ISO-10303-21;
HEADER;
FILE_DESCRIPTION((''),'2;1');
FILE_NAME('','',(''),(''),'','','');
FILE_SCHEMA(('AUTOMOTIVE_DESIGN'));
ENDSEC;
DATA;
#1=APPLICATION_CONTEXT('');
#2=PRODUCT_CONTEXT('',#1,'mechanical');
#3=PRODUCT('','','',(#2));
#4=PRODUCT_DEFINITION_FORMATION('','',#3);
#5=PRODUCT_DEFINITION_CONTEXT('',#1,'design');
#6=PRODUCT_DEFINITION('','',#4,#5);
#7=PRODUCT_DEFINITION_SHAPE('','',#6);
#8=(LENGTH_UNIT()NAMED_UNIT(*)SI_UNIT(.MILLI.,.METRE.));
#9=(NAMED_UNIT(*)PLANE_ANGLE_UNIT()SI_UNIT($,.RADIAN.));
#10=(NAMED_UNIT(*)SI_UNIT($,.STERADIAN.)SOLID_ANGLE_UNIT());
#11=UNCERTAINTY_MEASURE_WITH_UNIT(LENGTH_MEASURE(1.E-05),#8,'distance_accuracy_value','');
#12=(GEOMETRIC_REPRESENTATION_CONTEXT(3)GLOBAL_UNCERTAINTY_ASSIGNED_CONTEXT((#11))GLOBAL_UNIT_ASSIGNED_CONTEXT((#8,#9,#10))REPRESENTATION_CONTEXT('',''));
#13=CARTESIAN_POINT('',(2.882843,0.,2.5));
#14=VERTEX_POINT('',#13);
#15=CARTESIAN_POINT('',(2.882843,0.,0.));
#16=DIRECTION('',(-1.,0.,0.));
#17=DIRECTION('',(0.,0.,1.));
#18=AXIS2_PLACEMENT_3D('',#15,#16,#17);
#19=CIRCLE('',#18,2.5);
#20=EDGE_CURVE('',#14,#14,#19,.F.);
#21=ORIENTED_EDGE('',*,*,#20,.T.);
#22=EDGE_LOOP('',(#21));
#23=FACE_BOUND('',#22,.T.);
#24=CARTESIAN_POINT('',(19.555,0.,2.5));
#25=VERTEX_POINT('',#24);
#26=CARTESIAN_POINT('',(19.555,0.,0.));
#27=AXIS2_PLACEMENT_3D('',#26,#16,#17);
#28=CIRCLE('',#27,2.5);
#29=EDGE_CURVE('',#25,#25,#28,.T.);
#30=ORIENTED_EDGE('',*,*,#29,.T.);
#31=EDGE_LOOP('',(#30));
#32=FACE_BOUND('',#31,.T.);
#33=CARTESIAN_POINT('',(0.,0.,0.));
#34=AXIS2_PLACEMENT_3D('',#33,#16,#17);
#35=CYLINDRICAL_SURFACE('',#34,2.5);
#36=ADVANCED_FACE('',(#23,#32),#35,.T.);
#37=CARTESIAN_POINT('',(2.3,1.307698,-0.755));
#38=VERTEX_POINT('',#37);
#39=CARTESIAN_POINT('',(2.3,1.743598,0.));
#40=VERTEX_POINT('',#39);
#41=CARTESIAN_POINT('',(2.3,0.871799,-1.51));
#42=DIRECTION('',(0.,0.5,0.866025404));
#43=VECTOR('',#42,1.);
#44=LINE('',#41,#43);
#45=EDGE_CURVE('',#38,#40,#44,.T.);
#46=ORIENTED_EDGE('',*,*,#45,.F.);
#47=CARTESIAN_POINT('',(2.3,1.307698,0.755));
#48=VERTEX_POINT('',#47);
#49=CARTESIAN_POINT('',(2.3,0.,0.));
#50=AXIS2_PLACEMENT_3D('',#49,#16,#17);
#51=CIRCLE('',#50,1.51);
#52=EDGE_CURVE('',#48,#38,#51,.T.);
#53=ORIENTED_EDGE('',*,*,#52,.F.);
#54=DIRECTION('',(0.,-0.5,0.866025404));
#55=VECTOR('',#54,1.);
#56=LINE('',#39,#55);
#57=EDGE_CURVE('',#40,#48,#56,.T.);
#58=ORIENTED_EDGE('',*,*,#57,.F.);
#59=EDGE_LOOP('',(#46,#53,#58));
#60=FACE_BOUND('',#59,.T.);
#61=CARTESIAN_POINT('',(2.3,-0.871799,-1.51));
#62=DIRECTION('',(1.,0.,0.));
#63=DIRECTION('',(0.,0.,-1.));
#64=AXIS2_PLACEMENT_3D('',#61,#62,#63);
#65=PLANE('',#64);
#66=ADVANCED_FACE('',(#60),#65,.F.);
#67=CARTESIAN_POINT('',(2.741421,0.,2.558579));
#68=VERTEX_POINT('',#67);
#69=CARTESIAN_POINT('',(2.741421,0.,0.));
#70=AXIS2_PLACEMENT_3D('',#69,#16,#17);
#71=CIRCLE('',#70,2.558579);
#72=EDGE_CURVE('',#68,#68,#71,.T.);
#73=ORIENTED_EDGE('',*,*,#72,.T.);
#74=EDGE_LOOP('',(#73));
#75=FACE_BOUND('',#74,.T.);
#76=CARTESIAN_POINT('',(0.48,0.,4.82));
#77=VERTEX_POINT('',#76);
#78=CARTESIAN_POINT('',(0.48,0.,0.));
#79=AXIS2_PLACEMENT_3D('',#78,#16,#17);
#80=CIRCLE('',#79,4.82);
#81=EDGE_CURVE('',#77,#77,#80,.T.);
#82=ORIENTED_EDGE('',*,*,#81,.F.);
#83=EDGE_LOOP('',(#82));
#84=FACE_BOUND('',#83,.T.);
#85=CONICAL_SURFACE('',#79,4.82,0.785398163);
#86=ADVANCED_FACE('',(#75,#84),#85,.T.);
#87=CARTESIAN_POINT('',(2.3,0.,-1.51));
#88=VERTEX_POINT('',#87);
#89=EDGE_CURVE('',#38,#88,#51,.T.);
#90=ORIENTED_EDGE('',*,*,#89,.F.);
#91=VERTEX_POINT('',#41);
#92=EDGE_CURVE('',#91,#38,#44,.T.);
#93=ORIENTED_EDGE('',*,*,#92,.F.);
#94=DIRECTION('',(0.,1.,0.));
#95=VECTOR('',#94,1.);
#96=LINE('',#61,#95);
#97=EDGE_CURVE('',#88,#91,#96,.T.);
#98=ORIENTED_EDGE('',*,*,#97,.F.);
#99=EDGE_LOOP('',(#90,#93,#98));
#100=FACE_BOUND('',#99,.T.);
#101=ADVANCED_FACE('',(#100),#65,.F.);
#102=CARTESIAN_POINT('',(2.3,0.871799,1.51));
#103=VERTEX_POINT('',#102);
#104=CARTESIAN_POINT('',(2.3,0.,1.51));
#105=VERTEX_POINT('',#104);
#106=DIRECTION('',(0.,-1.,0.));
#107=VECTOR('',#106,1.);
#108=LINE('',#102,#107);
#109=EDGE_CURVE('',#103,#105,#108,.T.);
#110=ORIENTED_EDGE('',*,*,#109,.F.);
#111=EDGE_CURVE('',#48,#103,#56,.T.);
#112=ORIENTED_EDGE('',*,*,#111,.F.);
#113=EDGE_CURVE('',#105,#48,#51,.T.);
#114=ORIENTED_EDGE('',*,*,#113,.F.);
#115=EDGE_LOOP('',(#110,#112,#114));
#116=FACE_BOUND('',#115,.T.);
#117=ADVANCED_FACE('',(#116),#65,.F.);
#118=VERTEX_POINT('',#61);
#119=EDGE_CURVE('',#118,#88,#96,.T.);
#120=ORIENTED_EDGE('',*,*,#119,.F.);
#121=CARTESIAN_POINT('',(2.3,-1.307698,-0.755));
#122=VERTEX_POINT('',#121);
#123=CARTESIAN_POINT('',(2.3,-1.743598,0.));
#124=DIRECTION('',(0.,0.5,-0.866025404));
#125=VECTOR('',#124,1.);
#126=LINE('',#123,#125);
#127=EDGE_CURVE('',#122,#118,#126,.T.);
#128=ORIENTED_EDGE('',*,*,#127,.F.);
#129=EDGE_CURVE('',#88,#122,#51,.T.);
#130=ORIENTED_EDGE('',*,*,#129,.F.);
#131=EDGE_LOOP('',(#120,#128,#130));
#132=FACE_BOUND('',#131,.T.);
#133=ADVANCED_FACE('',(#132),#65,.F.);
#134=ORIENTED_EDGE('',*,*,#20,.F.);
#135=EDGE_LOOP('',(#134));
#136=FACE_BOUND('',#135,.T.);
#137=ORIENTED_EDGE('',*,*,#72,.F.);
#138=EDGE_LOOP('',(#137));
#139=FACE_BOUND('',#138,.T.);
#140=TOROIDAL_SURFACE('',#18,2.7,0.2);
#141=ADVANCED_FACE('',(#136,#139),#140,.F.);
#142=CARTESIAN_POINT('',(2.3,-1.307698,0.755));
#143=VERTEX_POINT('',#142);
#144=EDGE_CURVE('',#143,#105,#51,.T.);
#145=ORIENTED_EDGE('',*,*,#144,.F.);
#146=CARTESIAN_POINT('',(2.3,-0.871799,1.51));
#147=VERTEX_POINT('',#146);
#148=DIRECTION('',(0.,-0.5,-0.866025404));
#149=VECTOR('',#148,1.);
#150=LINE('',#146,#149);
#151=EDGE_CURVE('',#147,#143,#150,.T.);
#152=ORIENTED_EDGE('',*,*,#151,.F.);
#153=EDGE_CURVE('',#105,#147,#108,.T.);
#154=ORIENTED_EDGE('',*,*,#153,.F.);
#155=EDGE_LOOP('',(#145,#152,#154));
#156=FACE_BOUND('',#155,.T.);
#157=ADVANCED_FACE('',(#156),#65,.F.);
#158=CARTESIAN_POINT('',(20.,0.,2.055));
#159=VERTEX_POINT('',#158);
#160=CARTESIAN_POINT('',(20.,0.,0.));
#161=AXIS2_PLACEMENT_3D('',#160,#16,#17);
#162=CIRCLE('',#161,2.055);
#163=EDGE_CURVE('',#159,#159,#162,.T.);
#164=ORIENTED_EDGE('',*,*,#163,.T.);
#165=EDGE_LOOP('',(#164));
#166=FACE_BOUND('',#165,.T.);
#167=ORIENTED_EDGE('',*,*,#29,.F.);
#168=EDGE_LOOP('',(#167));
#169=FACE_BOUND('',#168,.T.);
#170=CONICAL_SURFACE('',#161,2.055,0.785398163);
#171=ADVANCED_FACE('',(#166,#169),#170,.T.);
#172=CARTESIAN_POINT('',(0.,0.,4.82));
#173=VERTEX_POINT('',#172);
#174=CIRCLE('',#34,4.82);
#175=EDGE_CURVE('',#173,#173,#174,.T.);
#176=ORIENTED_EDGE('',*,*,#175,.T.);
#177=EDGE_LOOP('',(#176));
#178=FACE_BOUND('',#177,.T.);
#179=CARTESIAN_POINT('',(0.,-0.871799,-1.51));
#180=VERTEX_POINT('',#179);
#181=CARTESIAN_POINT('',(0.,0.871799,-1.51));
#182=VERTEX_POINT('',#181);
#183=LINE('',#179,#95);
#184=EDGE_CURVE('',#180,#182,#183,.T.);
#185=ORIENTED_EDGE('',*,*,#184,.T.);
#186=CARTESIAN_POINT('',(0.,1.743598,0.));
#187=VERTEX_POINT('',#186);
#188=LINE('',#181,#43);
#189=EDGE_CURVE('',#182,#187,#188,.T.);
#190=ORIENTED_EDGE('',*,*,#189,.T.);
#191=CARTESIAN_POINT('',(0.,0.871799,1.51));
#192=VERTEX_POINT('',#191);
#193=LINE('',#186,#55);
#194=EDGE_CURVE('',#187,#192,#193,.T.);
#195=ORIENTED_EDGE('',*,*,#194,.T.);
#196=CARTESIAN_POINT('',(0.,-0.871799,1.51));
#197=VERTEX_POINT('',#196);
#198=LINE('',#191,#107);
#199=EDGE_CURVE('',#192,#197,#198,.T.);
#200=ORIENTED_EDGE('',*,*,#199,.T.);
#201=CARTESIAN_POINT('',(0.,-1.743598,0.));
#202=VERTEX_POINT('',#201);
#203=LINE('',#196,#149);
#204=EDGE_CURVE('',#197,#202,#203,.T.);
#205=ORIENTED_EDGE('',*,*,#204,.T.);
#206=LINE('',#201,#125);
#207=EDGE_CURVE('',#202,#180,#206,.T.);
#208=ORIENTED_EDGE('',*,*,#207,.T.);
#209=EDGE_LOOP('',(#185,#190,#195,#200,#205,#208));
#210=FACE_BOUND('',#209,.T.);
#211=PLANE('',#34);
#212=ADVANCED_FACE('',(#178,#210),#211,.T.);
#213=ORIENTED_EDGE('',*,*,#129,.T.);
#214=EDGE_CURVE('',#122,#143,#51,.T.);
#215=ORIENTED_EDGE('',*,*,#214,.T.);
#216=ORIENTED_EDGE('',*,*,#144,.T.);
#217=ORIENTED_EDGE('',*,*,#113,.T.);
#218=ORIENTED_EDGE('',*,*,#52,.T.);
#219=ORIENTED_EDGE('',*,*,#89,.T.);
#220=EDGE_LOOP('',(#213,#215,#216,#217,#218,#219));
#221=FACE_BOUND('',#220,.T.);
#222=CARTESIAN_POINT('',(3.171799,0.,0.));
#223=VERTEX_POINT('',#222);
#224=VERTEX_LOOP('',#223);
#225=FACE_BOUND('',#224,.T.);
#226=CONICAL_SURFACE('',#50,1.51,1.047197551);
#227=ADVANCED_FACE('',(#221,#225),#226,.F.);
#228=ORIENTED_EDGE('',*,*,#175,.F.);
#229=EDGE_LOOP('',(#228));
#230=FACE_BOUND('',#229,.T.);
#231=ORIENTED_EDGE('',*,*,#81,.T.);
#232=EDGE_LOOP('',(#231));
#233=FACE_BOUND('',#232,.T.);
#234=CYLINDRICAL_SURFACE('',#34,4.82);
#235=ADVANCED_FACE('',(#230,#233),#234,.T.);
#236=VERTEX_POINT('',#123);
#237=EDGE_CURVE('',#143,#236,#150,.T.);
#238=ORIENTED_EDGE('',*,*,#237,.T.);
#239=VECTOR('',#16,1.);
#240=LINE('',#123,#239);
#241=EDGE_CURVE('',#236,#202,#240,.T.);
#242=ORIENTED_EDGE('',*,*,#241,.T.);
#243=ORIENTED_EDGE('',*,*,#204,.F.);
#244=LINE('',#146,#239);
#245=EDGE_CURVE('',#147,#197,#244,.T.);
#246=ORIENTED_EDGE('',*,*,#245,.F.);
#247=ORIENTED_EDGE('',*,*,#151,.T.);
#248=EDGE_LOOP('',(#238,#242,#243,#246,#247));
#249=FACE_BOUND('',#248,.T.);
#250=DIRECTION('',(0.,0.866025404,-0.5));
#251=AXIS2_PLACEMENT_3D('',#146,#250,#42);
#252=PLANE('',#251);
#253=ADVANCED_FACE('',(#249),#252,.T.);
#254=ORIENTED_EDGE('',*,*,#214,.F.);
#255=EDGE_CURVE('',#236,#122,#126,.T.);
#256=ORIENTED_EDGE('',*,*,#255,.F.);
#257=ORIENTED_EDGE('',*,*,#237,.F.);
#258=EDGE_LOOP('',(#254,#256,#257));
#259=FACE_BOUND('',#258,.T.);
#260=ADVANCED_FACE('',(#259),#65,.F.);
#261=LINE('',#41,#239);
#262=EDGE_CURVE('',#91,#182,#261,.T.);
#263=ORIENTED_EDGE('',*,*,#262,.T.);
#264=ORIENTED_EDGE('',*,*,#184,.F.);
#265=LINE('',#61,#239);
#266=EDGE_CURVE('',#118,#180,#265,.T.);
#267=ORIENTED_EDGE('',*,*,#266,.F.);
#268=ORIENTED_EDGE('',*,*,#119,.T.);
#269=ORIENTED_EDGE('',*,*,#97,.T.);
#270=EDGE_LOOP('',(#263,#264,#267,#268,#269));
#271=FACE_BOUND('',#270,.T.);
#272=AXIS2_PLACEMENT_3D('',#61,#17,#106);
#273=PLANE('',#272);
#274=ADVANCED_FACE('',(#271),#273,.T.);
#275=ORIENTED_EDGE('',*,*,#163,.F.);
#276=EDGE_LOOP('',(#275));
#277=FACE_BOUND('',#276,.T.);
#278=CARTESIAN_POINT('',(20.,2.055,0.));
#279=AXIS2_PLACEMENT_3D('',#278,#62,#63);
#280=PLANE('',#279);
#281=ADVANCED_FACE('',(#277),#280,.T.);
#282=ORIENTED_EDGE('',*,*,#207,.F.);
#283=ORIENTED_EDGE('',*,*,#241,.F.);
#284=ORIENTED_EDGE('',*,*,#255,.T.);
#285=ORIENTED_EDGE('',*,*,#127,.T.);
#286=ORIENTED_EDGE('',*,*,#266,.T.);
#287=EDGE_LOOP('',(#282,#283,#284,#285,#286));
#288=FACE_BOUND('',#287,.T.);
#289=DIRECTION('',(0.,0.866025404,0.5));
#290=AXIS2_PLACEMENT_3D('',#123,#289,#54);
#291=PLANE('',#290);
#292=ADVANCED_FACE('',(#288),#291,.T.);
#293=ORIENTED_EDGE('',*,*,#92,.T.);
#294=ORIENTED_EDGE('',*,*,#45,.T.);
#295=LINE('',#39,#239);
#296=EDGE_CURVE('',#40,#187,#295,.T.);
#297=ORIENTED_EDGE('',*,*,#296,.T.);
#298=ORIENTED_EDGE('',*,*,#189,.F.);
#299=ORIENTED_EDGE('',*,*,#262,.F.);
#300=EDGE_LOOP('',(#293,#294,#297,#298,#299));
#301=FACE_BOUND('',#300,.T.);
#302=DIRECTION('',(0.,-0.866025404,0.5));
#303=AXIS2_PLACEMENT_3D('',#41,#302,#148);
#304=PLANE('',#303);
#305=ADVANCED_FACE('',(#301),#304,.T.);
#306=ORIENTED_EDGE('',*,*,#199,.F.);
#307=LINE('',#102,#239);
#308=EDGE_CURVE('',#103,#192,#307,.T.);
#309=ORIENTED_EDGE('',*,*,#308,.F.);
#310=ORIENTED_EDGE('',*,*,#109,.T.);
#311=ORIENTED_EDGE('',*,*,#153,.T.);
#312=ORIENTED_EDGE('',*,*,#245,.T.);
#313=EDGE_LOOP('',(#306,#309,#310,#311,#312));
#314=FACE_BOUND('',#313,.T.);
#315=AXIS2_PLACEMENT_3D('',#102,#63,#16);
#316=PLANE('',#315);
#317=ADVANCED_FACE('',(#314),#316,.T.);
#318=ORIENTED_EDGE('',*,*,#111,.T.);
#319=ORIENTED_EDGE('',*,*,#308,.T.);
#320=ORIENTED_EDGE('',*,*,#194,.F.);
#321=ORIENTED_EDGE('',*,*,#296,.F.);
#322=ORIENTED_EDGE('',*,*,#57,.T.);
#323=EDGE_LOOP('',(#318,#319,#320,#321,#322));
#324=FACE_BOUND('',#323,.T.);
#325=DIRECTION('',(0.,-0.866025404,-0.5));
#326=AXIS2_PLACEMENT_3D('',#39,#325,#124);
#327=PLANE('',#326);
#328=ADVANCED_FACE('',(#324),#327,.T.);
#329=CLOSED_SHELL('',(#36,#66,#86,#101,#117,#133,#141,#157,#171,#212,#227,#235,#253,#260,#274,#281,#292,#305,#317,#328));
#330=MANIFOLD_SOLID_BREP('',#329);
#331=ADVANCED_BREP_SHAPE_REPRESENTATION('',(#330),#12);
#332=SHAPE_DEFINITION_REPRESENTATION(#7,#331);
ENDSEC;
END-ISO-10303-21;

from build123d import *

# Parameters (mm, degrees)
FILLET1_R   = 0.2
HEX_START   = -2.3
HEX_2_DEPTH = 2.3


with BuildPart() as part:
    # BodySke → BaseBody (revolve)
    with BuildSketch(Plane.XY, mode=Mode.PRIVATE) as basebody_sk:
        Polygon((0, 0), (0, 4.82), (0.48, 4.82), (2.8, 2.5), (19.555, 2.5), (20, 2.055), (20, 0), align=None)
    revolve(basebody_sk.sketch.rotate(Axis((0, 0, 0), (1, 0, 0)), 90), axis=Axis((0, 0, 0), (1, 0, 0)))

    # Fillet1
    fillet1_edges = [part.edges().sort_by_distance(p)[0] for p in [
        (2.8, 0, -2.5),
    ]]
    fillet(fillet1_edges, radius=FILLET1_R)

    # Hex 2: read off the stored shape, not the designer's step
    # Hex 2 outline → Hex 2 (cut)
    with BuildSketch(Plane.ZY.offset(HEX_START)):
        Polygon((-1.51, -0.871798906), (0, -1.743597813), (1.51, -0.871798906), (1.51, 0.871798906), (0, 1.743597813), (-1.51, 0.871798906), align=None)
    extrude(amount=HEX_2_DEPTH, mode=Mode.SUBTRACT)

    # Hex 2 2 outline → Hex 2 2 (revolve, cut)
    with BuildSketch(Plane.YX):
        Polygon((1.51, 2.3), (0, 3.171798906), (0, 2.3), align=None)
    revolve(axis=Axis((0, 0, 0), (1, 0, 0)), mode=Mode.SUBTRACT)


solid = part.part
